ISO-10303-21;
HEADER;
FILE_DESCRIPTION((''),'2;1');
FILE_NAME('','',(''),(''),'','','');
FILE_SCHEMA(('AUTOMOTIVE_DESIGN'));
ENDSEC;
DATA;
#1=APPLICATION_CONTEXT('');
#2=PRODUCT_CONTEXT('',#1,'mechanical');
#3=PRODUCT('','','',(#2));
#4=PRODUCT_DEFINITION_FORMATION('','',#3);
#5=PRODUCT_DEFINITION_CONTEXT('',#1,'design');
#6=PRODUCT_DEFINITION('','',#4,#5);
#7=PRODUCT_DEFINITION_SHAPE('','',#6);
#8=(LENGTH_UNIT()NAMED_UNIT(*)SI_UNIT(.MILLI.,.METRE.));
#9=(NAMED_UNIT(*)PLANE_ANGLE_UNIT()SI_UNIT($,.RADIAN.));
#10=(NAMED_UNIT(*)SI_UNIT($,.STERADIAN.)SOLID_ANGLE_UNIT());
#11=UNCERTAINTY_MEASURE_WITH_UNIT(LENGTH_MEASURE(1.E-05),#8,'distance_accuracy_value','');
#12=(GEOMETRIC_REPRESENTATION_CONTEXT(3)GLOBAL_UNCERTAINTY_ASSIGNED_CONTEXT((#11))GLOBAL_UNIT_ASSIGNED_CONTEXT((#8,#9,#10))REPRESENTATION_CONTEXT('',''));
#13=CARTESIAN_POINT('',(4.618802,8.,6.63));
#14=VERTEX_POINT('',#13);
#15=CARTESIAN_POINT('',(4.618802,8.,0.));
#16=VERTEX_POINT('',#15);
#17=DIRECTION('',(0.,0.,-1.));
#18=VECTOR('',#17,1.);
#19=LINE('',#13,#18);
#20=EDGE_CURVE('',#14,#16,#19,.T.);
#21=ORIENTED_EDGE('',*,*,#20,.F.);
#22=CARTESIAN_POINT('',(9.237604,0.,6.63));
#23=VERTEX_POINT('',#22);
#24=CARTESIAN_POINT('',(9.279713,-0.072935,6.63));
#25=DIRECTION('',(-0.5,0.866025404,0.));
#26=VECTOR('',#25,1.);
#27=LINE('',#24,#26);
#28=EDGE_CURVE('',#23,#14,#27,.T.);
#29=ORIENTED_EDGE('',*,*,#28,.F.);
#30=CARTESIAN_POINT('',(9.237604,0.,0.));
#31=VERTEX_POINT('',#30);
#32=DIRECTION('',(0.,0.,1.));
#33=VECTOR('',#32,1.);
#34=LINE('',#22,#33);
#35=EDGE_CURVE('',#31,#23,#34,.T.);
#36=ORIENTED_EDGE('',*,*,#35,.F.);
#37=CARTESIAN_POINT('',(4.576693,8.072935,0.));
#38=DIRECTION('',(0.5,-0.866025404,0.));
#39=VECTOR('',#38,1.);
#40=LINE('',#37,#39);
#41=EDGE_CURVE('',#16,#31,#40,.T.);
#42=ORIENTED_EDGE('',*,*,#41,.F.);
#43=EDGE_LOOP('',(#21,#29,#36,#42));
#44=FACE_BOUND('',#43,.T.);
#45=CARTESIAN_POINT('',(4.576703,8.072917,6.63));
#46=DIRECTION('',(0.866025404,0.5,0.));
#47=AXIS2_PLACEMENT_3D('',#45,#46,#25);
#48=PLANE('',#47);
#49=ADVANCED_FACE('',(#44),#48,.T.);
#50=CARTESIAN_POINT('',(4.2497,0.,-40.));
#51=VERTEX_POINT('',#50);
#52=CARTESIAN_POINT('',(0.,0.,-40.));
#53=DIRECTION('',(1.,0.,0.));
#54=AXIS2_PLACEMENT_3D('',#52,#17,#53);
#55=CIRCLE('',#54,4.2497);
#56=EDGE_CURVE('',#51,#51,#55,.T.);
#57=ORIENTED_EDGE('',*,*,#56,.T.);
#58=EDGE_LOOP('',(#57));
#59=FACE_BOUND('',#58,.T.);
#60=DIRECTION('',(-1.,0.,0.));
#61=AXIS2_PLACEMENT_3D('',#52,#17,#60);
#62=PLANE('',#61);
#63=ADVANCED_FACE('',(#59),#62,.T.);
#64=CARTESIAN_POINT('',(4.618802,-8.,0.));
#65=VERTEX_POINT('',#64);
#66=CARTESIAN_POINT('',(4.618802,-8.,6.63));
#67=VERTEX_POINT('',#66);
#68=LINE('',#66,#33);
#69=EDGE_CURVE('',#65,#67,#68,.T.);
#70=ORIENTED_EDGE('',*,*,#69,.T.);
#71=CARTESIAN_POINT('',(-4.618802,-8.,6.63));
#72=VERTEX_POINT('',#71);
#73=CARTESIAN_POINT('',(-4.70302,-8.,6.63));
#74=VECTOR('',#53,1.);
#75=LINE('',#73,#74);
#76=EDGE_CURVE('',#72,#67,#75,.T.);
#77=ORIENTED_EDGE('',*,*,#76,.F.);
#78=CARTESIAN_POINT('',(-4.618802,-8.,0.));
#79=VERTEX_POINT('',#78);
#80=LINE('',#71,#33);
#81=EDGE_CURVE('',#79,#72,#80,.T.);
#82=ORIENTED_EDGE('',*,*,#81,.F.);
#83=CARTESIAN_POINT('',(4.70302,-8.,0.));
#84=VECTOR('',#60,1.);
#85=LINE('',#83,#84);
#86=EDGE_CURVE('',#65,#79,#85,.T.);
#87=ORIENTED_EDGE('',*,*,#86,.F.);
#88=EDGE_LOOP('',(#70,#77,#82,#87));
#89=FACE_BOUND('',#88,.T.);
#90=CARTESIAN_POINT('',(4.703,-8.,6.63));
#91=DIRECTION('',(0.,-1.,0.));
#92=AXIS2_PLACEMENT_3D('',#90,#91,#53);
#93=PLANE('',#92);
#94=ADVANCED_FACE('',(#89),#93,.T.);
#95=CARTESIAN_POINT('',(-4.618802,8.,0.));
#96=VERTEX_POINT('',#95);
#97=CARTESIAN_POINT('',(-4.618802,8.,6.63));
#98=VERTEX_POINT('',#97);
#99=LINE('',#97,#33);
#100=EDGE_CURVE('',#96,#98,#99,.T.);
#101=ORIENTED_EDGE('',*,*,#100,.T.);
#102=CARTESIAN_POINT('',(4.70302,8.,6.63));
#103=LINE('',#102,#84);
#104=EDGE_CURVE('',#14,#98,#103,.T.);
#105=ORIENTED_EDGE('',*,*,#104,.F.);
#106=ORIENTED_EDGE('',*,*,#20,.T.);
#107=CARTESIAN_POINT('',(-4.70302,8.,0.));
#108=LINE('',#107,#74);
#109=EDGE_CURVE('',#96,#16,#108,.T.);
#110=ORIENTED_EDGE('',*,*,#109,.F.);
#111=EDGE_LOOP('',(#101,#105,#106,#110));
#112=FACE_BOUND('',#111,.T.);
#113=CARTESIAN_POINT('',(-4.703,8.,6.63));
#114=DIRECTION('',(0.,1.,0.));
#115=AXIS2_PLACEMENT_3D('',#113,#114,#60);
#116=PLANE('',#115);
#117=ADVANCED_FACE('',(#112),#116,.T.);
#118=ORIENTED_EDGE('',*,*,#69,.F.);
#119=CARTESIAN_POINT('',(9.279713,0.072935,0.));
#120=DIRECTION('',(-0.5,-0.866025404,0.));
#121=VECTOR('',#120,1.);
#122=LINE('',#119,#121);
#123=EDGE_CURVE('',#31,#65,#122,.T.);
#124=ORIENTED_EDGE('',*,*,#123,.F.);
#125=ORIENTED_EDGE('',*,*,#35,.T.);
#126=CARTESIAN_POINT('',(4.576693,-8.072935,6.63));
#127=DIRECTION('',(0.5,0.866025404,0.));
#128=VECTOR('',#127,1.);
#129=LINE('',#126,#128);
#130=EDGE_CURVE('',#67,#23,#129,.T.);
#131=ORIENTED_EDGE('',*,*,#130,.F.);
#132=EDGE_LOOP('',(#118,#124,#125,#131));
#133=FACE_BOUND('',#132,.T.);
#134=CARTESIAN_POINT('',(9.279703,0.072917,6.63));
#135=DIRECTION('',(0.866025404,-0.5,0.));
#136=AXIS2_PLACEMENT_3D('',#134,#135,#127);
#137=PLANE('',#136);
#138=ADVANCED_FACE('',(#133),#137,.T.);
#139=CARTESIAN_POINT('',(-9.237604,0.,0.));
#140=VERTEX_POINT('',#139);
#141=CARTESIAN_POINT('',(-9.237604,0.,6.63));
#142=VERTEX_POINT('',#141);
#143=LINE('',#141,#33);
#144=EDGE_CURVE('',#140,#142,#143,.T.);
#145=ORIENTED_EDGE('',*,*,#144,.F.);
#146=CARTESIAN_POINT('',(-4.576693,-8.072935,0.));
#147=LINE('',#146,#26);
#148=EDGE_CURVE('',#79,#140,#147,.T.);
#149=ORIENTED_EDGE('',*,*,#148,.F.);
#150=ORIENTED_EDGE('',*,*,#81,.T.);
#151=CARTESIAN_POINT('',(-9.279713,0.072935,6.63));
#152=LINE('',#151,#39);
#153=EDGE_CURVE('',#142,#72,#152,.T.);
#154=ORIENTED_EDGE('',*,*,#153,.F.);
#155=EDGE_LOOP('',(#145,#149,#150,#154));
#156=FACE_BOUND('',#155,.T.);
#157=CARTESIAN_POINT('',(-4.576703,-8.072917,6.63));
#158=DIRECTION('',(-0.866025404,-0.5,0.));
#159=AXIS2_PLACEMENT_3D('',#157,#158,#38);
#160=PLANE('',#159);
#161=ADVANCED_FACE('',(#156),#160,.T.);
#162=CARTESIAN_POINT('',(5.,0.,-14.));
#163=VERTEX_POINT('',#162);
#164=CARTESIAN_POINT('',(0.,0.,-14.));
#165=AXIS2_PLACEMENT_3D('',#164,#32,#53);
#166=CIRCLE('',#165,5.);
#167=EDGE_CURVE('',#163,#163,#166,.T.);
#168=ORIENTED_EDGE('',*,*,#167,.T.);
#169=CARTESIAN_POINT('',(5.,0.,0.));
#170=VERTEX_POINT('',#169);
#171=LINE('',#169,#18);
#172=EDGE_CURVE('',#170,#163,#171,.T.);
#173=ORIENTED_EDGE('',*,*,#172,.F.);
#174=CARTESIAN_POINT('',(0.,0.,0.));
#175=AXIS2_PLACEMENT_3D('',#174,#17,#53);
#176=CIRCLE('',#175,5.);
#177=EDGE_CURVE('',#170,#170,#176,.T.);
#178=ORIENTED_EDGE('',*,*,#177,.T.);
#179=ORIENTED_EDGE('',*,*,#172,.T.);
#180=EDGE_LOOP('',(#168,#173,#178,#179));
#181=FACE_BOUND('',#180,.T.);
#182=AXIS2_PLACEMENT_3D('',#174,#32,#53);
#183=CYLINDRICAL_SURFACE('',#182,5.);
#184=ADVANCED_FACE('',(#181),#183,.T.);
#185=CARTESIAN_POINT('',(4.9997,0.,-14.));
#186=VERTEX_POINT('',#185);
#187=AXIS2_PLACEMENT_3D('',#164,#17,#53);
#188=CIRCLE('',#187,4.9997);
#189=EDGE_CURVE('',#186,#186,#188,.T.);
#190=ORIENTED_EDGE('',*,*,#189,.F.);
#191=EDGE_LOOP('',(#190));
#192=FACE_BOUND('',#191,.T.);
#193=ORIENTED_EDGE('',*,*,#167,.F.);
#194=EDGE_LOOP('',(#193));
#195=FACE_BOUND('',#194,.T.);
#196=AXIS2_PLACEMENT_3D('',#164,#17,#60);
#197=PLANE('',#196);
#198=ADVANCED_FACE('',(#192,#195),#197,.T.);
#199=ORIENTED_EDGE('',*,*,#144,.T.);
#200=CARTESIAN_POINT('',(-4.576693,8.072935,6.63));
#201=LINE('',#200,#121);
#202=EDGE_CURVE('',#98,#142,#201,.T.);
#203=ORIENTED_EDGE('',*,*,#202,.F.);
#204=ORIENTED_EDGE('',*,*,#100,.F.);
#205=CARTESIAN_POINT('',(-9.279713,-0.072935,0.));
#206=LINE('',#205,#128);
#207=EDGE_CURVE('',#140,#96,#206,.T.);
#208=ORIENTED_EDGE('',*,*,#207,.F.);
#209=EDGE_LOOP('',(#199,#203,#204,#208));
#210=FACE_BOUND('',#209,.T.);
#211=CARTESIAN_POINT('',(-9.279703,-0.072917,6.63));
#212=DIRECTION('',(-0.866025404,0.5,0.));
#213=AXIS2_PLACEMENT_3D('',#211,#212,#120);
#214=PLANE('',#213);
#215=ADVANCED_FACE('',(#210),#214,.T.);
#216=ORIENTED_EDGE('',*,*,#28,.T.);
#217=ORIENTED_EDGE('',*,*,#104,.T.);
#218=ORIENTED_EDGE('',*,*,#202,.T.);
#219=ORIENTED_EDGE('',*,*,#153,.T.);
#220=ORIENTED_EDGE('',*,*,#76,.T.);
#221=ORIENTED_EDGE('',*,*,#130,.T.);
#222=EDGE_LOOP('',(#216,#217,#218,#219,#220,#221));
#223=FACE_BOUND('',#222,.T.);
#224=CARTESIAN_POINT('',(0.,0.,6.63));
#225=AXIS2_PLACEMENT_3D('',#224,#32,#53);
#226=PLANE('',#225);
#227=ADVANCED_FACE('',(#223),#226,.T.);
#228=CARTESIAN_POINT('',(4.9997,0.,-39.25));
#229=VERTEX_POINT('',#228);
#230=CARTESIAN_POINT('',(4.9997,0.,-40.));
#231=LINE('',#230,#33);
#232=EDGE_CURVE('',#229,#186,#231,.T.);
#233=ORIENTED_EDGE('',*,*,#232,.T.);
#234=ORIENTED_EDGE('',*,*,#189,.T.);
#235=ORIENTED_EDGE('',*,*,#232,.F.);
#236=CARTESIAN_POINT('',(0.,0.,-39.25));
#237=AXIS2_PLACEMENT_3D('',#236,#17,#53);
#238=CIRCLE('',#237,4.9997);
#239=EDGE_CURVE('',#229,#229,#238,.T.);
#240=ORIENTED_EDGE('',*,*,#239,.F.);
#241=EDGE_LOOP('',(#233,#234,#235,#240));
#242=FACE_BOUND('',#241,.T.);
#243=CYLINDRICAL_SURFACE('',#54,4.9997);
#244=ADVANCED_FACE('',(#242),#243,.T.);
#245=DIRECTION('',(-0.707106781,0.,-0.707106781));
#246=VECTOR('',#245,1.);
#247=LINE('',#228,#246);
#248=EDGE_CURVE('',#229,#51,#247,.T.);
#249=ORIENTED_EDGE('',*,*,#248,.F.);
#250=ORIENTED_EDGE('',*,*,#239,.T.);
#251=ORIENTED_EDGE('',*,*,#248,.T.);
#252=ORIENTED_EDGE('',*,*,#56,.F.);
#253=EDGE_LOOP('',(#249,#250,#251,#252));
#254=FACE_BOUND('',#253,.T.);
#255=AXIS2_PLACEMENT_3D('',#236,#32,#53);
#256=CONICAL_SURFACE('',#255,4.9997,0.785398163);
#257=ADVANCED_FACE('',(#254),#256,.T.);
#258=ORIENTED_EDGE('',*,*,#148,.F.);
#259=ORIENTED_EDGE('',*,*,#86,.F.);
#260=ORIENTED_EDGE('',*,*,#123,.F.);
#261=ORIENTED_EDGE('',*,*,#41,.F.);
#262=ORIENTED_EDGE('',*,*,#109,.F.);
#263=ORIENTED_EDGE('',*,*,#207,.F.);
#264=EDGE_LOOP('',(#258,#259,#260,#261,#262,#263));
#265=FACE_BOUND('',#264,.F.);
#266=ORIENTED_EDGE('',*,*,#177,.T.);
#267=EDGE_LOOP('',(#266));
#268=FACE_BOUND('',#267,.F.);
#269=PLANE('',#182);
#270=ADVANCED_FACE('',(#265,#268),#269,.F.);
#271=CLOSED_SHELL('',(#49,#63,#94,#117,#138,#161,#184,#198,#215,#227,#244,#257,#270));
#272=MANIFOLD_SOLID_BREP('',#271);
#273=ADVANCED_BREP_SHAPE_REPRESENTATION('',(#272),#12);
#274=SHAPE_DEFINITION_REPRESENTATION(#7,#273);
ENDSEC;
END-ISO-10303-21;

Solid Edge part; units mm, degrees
sketch "Sketch1" plane through (0, 0, 0) normal (0, 0, 1) x (1, 0, 0)
  circle A0 centre (0, 0) radius 9.28
  dimension "D1" = 18.56
extrude "Protrusion1" add sketch "Sketch1" along normal blind 6.63
sketch "Sketch2" plane through (0, 0, 0) normal (0, 0, -1) x (1, 0, 0)
  circle A0 centre (0, 0) radius 5
extrude "Protrusion2" add sketch "Sketch2" along normal blind 40
sketch "Sketch3" plane through (0, 0, -40) normal (0, 0, -1) x (1, 0, 0)
  circle A0 centre (0, 0) radius 4.9997
extrude "Cutout1" cut sketch "Sketch3" against normal blind 26 flip side to cut
chamfer "Chamfer_1" distance 0.75 angle 45 1 edges at (-4.9997, 0, -40)
sketch "Sketch4" plane through (0, 0, 6.63) normal (0, 0, 1) x (1, 0, 0)
  line L0 (-4.703, 8) -> (4.703, 8)
  dimension "D1" = 16
extrude "Cutout2" cut sketch "Sketch4" against normal up to next material side at (0, 8.05, 6.63)
pattern_circular "Pattern1" count 6 over 360 about axis through (0, 0, 6.63) along (0, 0, 1) of "Cutout2"
properties part number "24101207"
